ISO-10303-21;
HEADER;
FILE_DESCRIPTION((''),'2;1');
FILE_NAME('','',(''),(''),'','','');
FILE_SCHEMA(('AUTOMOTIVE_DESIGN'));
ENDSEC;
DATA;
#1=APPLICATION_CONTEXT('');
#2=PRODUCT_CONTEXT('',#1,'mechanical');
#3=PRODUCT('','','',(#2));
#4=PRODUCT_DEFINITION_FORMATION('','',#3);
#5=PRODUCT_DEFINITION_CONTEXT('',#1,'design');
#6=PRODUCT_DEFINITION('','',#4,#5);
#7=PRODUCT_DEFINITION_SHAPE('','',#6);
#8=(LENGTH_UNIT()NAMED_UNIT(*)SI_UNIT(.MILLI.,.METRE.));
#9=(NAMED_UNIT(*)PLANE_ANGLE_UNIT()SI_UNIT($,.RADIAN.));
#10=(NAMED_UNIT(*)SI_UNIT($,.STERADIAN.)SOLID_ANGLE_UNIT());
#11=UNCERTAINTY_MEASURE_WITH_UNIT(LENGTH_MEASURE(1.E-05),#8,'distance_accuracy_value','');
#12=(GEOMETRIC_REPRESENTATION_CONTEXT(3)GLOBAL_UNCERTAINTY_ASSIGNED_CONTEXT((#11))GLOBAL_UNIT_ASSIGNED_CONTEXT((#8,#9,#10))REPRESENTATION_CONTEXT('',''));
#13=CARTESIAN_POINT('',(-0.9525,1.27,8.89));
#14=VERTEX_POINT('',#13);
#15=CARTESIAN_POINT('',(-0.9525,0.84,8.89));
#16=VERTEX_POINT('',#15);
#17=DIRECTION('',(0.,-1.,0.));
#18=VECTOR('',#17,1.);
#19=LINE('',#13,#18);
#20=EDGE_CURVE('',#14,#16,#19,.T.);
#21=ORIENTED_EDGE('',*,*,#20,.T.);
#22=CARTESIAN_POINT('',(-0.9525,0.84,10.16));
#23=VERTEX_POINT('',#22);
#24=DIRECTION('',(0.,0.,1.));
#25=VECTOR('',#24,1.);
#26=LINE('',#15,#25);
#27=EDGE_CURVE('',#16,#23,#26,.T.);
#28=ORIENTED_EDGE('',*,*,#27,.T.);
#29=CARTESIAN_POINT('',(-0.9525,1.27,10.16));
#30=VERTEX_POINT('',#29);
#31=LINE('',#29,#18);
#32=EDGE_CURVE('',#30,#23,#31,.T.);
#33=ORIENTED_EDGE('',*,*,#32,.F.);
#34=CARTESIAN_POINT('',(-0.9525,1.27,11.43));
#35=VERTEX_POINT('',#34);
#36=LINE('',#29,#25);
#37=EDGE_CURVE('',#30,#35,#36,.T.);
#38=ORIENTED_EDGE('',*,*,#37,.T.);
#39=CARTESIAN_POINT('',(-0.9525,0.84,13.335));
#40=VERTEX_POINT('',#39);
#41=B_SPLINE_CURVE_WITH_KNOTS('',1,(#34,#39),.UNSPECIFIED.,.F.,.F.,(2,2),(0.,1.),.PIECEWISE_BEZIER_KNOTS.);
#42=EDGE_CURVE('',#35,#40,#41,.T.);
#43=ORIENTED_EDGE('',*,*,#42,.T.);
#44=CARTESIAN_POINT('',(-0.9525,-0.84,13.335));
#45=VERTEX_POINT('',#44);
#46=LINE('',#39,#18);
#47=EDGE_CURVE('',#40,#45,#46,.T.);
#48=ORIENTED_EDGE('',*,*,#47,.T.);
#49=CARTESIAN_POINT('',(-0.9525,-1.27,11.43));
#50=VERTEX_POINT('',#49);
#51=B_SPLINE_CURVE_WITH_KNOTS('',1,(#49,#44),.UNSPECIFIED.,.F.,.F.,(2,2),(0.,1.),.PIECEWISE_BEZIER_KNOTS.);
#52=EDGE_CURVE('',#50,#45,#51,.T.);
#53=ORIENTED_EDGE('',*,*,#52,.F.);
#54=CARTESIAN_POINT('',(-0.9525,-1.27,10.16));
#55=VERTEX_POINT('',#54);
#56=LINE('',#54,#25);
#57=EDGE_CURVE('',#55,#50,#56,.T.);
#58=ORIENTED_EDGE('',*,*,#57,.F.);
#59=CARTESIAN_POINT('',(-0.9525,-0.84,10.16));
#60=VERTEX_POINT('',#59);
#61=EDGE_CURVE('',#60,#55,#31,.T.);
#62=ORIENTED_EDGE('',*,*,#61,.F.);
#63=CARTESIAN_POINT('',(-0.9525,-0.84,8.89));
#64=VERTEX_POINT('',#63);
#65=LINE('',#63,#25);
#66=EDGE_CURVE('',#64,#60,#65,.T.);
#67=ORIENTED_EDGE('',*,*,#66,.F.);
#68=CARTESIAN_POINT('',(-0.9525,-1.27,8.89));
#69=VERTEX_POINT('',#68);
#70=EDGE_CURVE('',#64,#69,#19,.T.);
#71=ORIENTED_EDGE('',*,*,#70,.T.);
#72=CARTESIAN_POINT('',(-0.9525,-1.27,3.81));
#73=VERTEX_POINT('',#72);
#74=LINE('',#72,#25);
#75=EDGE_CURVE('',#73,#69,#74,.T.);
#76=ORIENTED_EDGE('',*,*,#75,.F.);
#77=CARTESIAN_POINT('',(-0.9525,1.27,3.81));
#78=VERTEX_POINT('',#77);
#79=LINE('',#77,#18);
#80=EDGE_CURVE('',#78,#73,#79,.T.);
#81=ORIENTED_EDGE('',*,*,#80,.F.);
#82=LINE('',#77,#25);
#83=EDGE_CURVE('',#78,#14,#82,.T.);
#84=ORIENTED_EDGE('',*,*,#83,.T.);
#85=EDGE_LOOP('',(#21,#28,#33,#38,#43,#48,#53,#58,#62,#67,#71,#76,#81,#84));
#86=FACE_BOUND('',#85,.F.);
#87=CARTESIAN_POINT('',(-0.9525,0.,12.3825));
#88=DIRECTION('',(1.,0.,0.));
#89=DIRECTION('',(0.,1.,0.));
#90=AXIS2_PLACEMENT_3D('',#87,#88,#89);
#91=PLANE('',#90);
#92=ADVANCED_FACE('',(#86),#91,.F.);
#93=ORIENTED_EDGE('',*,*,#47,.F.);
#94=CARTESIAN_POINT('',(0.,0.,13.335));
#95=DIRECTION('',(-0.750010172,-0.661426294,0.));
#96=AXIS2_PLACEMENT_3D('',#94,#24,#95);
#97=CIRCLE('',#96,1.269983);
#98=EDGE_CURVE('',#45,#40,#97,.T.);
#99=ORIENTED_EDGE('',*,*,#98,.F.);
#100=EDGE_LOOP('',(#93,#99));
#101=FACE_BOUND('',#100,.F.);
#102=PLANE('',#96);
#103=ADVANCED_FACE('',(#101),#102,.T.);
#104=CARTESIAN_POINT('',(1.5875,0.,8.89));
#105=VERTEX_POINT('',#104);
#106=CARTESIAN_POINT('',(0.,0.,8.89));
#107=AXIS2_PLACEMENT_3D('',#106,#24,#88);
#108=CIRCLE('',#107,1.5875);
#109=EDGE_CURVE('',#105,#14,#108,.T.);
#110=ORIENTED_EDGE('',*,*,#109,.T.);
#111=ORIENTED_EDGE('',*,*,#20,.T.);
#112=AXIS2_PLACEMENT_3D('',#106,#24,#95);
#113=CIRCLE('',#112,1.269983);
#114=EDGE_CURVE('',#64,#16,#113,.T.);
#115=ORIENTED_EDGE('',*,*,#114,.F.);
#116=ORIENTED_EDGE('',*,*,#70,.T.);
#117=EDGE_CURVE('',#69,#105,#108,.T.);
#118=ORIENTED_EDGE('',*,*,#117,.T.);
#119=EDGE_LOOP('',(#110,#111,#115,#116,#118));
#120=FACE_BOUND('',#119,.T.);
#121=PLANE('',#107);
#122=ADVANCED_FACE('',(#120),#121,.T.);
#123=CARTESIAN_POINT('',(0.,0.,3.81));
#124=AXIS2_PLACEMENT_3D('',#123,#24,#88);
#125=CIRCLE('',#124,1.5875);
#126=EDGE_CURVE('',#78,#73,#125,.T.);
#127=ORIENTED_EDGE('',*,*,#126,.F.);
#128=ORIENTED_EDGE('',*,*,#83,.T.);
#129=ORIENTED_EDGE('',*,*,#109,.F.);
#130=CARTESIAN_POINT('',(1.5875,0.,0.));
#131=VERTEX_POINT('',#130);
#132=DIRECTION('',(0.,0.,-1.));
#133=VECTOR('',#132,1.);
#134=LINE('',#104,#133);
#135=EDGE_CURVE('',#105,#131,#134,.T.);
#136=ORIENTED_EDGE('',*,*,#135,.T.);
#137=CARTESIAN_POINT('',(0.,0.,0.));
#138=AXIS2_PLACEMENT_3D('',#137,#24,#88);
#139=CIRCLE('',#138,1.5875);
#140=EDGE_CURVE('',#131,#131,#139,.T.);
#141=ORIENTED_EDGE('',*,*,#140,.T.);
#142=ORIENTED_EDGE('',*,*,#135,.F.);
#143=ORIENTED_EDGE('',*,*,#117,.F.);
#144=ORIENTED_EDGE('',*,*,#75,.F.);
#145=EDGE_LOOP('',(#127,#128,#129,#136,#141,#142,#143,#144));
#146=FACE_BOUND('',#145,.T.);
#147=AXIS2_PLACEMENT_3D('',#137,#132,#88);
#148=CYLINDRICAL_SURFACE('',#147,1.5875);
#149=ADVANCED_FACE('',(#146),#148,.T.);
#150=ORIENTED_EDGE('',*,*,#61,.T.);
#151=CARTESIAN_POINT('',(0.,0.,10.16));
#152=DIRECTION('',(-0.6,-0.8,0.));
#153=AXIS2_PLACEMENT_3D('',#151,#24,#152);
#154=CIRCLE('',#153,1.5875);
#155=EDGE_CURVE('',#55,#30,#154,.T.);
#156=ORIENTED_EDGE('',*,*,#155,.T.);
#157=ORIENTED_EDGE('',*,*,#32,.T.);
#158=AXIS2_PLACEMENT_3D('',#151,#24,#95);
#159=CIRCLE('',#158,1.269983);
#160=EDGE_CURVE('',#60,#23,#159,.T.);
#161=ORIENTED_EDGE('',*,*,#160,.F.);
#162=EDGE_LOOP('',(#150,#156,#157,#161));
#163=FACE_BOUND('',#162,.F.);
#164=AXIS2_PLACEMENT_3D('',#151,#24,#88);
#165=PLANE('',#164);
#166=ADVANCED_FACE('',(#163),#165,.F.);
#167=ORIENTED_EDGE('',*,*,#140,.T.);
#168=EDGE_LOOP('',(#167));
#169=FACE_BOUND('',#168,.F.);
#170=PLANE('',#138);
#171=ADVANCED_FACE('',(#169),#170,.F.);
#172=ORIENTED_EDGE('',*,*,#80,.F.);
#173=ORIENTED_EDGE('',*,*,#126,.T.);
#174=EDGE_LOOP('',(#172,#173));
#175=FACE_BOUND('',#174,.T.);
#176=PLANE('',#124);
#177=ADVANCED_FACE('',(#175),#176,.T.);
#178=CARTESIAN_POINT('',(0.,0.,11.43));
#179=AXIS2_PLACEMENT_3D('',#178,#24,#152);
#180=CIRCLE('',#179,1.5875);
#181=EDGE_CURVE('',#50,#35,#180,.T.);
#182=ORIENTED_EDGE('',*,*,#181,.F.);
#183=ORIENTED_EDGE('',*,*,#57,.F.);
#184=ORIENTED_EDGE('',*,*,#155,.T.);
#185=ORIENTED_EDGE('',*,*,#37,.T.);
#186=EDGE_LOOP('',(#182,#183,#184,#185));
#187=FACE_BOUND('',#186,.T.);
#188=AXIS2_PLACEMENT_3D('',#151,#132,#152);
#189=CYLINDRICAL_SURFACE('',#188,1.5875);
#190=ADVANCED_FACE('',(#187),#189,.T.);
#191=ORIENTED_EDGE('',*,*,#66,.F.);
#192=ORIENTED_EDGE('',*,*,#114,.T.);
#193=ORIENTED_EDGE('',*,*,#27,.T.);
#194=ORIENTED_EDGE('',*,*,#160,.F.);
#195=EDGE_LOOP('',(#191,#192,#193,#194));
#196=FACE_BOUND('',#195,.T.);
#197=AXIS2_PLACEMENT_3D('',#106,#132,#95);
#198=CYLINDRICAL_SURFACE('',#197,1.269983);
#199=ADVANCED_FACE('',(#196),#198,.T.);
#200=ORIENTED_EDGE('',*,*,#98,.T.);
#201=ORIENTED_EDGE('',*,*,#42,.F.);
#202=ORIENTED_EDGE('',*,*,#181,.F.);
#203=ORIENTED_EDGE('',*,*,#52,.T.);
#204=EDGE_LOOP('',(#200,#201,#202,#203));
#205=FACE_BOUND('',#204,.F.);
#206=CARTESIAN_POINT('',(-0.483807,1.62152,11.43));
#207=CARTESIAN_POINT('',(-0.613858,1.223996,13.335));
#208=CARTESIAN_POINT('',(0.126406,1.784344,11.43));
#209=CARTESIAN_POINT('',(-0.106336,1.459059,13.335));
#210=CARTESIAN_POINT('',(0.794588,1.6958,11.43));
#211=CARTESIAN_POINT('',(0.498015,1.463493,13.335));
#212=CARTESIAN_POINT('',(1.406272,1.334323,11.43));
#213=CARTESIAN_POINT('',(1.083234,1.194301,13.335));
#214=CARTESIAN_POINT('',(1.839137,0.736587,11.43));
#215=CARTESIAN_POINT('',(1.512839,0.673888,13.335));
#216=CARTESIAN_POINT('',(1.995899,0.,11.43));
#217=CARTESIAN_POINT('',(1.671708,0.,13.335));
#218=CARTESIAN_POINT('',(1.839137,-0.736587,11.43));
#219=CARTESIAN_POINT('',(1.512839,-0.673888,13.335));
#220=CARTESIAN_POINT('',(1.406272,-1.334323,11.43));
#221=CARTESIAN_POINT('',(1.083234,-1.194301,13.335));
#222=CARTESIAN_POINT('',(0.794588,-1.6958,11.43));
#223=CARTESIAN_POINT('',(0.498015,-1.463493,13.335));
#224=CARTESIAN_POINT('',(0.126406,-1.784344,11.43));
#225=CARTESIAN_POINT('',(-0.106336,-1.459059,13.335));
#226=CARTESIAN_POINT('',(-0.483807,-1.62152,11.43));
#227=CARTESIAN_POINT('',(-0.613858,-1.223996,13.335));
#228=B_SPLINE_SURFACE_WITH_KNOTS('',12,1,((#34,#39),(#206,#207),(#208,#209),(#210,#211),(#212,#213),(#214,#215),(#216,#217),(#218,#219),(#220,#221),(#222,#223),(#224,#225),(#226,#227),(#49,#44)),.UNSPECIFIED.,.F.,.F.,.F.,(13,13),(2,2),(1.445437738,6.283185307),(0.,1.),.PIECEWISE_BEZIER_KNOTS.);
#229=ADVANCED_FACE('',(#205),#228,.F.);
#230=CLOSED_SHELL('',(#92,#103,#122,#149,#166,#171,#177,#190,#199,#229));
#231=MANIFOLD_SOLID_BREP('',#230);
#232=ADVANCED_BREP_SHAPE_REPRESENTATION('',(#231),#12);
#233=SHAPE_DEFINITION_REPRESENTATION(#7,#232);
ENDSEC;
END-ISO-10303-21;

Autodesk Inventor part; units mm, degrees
ref_plane "YZ Plane" through (0, 0, 0) normal (1, 0, 0) x (0, 1, 0)
ref_plane "XZ Plane" through (0, 0, 0) normal (0, 1, 0) x (-1, 0, 0)
sketch "Sketch1" plane through (0, 0, 0) normal (0, 0, 1) x (1, 0, 0)
  circle A0 centre (0, 0) radius 1.5875
  dimension "d0" = 3.175
extrude "Extrusion1" add sketch "Sketch1" along normal blind 3.81
sketch "Sketch2" plane through (0, 0, 3.81) normal (0, 0, 1) x (1, 0, 0)
  circle A0 centre (0, 0) radius 1.5875 projected
  line L0 (-0.9525, 1.27) -> (-0.9525, -1.27)
  arc A1 (-0.9525, -1.27) -> (-0.9525, 1.27) centre (0, 0) ccw
  point P0 (1.5875, 0)
  point P1 (-0.9525, 0)
  dimension "d4" = 2.54
extrude "Extrusion2" add sketch "Sketch2" along normal blind 5.08 contours A0 L0 picked at (0.1068, 0.3913)
sketch "Sketch3" plane through (0, 0, 8.89) normal (0, 0, 1) x (1, 0, 0)
  arc A0 (-0.9525, -1.27) -> (-0.9525, 1.27) centre (0, 0) ccw projected
  line L0 (-0.9525, 1.27) -> (-0.9525, -1.27) projected
  arc A1 (-0.9525, -0.84) -> (-0.9525, 0.84) centre (0, 0) ccw
  line L1 (-0.9525, 0.84) -> (-0.9525, -0.84)
  dimension "d8" = 2.54
extrude "Extrusion3" add sketch "Sketch3" along normal blind 1.27 contours L0 A1
sketch "Sketch4" plane through (0, 0, 10.16) normal (0, 0, 1) x (1, 0, 0)
  line L0 (-0.9525, 0.84) -> (-0.9525, -0.84) projected
  arc A0 (-0.9525, -0.84) -> (-0.9525, 0.84) centre (0, 0) ccw projected
  arc A1 (-0.9525, -1.27) -> (-0.9525, 1.27) centre (0, 0) ccw
  line L1 (-0.9525, 1.27) -> (-0.9525, -1.27)
  dimension "d12" = 3.175
extrude "Extrusion4" add sketch "Sketch4" along normal blind 1.27
ref_plane "Work Plane1" through (0, 0, 13.335) normal (0, 0, 1) x (1, 0, 0)
sketch "Sketch5" plane through (0, 0, 13.335) normal (0, 0, 1) x (1, 0, 0)
  arc A0 (-0.9525, -0.84) -> (-0.9525, 0.84) centre (0, 0) ccw
  line L0 (-0.9525, 0.84) -> (-0.9525, -0.84)
  point P0 (1.5875, 0)
  point P1 (-0.9525, 0)
  dimension "d17" = 2.54
  dimension "d19" = 1.5875
  dimension "d20" = 2.54
sketch "Sketch6" plane through (0, 0, 11.43) normal (0, 0, 1) x (1, 0, 0)
  arc A0 (-0.9525, -1.27) -> (-0.9525, 1.27) centre (0, 0) ccw projected
  line L0 (-0.9525, 1.27) -> (-0.9525, -1.27) projected
loft "Loft1" add profiles "Sketch5" section 1 edges at (1.5875, 0, 11.43) (-0.9525, 0, 11.43)
properties part number "Lg Motor Shaft" material "Stainless Steel"
